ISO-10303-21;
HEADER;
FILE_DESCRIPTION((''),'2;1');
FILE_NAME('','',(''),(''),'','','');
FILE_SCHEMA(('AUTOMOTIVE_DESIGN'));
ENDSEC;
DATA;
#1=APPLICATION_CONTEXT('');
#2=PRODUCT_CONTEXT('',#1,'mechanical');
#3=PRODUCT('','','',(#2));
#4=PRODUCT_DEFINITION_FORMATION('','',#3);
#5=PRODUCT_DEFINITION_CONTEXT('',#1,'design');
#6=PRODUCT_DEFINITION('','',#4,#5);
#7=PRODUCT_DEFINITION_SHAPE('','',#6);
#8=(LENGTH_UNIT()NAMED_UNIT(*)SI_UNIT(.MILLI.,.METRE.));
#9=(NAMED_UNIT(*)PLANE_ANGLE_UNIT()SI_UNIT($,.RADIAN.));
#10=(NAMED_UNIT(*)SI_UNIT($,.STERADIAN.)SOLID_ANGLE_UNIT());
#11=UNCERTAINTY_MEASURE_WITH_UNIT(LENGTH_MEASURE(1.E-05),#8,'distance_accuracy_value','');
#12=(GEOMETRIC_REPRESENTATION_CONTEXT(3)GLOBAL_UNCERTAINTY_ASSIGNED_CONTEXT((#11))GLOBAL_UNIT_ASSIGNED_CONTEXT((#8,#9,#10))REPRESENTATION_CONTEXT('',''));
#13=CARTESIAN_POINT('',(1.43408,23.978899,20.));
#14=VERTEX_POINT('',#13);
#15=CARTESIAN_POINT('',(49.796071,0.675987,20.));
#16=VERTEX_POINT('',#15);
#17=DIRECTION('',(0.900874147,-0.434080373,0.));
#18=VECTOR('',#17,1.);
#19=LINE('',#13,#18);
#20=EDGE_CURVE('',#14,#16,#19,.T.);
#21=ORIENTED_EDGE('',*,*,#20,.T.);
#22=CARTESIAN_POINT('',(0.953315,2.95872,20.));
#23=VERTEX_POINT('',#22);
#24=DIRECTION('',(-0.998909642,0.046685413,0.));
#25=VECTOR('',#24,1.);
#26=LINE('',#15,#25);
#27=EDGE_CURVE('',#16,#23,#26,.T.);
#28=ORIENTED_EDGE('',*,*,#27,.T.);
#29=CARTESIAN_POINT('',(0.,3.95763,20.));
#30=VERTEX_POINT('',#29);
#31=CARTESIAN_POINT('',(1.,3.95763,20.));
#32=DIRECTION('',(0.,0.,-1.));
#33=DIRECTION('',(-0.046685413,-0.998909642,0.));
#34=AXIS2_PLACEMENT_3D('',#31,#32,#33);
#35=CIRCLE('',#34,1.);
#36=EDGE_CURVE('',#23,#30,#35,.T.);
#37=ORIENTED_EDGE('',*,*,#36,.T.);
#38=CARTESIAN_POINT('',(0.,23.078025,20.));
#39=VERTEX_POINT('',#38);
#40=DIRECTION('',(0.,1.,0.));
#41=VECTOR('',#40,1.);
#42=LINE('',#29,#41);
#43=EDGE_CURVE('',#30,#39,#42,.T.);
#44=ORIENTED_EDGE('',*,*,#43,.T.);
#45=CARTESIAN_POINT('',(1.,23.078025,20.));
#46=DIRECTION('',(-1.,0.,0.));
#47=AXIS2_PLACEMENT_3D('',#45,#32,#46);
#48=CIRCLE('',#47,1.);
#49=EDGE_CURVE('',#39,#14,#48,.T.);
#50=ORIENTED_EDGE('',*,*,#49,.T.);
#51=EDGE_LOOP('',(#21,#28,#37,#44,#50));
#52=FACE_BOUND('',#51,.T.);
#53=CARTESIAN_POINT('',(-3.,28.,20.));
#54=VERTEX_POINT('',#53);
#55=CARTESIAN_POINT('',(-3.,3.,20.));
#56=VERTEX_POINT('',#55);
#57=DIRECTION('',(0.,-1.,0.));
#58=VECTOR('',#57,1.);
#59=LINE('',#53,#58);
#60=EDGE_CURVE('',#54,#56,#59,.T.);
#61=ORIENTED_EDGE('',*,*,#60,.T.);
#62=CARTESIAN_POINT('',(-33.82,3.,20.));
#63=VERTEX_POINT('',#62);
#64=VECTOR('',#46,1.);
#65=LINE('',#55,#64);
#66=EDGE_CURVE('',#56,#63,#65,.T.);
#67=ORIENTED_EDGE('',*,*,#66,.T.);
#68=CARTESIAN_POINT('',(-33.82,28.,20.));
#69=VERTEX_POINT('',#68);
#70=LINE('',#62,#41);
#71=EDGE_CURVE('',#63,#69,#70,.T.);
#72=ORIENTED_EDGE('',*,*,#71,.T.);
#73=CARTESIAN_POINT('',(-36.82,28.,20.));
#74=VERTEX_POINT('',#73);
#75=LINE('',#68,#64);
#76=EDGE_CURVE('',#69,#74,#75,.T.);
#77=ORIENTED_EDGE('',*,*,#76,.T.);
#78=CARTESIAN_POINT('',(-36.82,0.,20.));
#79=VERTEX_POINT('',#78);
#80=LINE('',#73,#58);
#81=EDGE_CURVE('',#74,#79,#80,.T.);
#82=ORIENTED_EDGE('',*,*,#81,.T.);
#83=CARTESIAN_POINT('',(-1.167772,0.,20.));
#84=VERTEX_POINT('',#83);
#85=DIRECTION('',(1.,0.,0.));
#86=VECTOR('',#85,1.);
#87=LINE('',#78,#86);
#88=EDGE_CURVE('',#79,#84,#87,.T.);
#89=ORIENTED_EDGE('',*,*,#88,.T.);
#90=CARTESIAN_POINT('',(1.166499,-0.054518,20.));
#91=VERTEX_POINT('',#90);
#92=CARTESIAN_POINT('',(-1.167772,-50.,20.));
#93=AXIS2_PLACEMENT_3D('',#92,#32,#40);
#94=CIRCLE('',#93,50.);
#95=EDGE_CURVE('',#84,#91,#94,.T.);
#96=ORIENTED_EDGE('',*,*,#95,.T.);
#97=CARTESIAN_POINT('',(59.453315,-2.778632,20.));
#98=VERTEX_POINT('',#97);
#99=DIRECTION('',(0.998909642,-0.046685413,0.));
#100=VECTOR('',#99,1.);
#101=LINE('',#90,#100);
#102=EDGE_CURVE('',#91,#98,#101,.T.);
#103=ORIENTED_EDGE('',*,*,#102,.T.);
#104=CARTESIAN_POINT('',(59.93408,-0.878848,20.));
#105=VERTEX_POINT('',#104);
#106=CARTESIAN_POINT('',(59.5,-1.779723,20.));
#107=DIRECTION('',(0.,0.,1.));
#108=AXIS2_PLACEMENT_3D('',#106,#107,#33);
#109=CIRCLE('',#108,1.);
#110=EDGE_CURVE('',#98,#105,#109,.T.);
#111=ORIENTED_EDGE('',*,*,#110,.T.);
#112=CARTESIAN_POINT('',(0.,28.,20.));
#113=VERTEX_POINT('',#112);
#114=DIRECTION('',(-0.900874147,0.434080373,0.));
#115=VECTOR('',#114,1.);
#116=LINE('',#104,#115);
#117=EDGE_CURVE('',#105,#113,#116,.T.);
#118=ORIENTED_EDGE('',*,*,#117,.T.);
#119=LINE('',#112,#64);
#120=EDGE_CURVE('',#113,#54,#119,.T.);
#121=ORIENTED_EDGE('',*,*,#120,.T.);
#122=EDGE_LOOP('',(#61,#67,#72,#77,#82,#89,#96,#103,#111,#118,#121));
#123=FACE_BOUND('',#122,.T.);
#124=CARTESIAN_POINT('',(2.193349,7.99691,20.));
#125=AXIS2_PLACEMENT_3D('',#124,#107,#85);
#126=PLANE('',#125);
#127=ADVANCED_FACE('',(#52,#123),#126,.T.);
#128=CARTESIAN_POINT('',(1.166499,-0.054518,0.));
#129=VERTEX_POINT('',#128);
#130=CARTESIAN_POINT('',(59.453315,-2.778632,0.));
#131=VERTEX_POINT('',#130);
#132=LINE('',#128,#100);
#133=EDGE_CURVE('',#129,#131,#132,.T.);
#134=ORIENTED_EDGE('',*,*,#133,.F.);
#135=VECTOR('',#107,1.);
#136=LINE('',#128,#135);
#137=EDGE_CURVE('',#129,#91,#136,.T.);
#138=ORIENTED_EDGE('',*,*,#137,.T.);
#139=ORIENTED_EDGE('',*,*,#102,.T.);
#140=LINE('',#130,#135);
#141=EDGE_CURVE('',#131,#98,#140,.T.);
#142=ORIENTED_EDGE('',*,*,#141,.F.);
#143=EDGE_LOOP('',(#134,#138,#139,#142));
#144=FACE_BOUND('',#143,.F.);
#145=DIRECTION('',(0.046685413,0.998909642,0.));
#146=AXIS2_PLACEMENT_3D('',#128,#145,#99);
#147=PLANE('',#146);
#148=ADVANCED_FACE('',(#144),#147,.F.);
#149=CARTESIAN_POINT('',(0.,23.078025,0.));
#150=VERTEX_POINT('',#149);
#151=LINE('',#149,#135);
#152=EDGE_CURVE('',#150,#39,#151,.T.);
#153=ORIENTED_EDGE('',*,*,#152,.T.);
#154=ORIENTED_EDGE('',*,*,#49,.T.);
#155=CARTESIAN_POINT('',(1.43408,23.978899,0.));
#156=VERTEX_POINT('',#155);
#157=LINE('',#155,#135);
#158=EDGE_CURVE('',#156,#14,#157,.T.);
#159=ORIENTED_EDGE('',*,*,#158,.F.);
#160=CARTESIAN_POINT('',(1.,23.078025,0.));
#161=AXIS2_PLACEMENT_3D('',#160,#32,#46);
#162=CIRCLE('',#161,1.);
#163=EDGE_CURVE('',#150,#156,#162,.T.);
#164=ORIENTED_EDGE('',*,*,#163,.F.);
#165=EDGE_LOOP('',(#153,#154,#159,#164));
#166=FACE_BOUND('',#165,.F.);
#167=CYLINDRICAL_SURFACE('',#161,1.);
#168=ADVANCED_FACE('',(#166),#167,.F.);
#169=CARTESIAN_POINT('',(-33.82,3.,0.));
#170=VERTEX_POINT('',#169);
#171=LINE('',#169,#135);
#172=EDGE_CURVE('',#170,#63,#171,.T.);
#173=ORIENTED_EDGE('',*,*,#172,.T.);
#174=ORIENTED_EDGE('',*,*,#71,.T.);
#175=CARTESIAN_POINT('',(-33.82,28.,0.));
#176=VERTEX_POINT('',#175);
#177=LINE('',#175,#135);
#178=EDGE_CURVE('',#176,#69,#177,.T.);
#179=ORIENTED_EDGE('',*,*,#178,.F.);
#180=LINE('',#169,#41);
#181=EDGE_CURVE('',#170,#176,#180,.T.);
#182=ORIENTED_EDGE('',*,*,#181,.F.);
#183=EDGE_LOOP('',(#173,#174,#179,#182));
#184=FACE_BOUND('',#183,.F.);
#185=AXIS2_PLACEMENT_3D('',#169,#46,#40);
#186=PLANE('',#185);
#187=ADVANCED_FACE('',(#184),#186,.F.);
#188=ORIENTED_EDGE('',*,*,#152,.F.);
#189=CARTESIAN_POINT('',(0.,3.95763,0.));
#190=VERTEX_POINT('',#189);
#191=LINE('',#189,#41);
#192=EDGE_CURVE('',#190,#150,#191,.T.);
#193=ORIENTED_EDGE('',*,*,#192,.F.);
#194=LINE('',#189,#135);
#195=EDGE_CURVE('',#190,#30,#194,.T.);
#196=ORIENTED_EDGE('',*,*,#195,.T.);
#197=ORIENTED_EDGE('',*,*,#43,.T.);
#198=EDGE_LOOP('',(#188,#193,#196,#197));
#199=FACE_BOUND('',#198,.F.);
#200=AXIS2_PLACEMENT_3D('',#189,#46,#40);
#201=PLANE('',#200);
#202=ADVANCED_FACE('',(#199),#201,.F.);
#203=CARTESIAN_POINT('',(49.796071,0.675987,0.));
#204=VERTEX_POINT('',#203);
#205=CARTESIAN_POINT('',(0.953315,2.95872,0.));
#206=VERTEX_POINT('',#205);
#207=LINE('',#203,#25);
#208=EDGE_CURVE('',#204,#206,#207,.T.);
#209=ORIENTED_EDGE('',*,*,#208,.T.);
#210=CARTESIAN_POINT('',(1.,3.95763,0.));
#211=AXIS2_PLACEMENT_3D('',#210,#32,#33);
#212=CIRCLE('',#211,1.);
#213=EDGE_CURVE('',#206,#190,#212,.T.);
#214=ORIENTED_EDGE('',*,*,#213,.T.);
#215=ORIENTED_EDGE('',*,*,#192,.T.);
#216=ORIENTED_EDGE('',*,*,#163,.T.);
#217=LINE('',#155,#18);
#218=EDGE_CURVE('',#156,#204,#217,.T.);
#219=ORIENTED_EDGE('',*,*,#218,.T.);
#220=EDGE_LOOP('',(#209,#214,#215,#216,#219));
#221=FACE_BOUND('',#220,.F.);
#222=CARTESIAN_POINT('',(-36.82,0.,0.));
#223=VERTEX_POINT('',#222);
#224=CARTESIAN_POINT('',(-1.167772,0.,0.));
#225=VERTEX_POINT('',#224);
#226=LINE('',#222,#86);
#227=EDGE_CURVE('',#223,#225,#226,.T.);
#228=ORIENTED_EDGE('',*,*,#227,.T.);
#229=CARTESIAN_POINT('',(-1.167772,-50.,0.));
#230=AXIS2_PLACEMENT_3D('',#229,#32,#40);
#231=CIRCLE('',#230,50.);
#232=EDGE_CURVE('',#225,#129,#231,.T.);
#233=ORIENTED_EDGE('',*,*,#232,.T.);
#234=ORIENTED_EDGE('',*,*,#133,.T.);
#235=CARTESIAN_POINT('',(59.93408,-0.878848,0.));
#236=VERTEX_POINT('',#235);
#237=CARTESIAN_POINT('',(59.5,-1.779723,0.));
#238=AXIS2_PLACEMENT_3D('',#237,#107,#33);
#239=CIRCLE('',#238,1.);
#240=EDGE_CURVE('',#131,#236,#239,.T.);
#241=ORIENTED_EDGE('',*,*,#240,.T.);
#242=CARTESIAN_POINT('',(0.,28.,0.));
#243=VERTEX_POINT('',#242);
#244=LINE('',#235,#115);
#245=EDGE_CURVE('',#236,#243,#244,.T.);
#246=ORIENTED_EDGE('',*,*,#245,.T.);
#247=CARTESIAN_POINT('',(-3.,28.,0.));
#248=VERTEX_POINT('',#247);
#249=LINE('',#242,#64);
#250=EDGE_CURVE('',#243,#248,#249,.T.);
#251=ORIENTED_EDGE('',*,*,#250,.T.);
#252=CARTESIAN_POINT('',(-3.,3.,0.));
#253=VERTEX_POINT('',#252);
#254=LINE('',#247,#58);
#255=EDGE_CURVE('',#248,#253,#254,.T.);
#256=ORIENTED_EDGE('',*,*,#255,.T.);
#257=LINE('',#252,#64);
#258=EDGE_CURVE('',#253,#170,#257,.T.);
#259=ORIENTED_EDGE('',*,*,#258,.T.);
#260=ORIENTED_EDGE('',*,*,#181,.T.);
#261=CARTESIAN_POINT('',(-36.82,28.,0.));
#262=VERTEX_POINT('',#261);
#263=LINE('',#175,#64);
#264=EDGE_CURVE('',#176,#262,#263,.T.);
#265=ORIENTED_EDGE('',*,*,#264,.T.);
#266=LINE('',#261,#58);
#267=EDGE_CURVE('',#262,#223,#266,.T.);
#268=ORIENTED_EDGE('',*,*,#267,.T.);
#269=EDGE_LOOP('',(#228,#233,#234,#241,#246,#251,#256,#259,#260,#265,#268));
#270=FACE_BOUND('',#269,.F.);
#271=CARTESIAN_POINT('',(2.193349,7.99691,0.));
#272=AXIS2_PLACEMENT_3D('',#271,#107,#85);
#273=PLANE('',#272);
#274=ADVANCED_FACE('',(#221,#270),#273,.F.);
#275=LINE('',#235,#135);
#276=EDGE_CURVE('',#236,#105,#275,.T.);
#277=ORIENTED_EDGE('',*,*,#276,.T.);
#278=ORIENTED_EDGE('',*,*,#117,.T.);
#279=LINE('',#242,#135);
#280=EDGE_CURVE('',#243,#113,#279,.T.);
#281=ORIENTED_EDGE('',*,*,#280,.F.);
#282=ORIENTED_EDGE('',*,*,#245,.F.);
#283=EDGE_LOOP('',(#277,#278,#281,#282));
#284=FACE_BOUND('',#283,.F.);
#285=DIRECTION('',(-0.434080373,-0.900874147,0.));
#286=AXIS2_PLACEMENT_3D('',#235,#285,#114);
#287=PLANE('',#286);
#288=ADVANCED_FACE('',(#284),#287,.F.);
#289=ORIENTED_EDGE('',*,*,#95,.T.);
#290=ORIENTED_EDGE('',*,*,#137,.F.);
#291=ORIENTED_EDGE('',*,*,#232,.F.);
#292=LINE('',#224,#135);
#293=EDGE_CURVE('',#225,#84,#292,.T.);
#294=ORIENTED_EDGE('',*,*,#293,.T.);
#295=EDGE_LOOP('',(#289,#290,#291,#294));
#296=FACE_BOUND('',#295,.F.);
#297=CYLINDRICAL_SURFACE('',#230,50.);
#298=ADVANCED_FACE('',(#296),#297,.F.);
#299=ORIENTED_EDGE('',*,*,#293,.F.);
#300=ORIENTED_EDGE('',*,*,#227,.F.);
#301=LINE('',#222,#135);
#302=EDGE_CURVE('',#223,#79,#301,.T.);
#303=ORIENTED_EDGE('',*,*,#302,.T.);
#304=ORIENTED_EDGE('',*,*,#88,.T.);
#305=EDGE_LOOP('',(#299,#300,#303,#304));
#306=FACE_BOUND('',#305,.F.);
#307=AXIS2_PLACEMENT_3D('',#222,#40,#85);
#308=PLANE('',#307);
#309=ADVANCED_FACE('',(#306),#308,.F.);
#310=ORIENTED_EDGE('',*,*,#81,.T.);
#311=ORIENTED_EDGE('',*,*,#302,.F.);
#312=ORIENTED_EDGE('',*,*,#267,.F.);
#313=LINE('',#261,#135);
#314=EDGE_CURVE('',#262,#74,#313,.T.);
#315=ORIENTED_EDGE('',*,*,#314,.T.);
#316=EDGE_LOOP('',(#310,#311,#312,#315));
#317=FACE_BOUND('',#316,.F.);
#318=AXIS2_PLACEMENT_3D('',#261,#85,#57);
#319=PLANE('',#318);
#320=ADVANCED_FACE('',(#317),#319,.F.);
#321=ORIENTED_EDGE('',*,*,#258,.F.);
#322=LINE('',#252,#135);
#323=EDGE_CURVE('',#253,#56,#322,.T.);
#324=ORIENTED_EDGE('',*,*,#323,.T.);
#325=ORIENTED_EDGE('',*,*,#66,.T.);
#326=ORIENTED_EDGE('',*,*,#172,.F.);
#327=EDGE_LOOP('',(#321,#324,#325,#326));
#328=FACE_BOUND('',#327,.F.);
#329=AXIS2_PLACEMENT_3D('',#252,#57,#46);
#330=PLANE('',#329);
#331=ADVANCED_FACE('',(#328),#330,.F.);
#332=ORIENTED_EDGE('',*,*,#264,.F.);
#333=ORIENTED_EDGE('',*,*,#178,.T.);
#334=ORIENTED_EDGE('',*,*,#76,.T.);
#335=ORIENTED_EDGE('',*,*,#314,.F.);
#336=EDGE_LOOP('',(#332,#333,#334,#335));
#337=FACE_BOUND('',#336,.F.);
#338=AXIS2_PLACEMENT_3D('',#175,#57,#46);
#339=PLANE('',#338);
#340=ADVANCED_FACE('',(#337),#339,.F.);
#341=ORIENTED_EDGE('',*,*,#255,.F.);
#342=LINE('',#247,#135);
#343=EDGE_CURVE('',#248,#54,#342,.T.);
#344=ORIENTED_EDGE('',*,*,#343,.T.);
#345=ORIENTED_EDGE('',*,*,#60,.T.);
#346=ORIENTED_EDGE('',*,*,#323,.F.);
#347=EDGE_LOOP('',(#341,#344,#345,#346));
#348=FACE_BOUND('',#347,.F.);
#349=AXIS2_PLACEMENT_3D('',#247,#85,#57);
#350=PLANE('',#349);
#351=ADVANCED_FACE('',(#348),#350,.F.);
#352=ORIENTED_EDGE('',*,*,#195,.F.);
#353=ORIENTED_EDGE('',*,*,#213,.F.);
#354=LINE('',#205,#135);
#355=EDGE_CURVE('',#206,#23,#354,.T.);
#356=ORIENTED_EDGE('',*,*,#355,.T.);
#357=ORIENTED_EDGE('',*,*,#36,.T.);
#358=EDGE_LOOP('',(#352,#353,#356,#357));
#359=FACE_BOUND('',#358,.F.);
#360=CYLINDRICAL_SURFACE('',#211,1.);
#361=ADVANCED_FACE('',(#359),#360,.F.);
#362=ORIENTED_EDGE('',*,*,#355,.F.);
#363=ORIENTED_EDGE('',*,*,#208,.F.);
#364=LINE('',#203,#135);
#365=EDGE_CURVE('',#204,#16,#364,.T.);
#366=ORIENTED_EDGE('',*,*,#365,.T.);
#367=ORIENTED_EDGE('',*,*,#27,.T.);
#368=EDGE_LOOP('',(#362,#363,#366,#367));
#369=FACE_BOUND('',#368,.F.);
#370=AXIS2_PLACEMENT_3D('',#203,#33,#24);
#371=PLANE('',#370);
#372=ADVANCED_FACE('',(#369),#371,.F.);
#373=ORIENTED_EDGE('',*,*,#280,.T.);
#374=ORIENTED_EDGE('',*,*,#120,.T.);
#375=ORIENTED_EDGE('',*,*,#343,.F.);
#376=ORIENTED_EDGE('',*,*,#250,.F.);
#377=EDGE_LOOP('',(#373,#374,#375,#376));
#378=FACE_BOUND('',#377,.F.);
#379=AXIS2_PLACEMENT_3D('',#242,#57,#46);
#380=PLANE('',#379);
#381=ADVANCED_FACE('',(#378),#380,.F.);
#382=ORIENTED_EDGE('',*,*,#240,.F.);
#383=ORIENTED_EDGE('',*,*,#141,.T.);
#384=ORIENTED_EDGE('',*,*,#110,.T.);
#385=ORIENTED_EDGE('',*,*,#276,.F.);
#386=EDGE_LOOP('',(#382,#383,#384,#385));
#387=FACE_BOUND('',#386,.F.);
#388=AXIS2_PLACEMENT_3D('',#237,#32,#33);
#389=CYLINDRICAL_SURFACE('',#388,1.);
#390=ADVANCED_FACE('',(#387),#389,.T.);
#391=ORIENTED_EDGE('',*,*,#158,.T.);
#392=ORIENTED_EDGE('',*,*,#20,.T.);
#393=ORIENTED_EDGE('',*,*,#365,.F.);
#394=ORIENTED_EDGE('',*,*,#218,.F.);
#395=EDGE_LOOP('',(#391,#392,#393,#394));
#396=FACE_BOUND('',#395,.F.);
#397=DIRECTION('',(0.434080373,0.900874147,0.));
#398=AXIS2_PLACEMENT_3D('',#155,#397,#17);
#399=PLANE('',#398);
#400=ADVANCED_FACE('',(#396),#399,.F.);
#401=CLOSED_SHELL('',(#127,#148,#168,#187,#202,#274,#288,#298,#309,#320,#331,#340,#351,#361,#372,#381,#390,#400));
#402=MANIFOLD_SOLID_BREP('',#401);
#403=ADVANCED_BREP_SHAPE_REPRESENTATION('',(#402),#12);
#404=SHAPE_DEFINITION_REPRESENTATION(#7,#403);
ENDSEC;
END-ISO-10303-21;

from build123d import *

# Parameters (mm, degrees)
F2_DEPTH = 20


with BuildPart() as f2:
    # F1 (on Top) → F2 (new body)
    with BuildSketch(Plane.XY):
        with BuildLine():
            Line((-36.82, 0), (-1.1677719632, 0))
            ThreePointArc((-1.1677719632, 0), (-0.0003183659, -0.0136313372), (1.1664986733, -0.0545179161))
            Line((1.1664986733, -0.0545179161), (59.4533145873, -2.7786322345))
            ThreePointArc((59.4533145873, -2.7786322345), (60.4694396966, -2.0250523194), (59.9340803732, -0.8788484453))
            Line((59.9340803732, -0.8788484453), (0, 28))
            Line((0, 28), (-3, 28))
            Line((-3, 28), (-3, 3))
            Line((-3, 3), (-33.82, 3))
            Line((-33.82, 3), (-33.82, 28))
            Line((-33.82, 28), (-36.82, 28))
            Line((-36.82, 28), (-36.82, 0))
        make_face()
        with BuildLine():
            ThreePointArc((0.9533145873, 2.9587201802), (0.2765757079, 3.267226104), (0, 3.9576298219))
            Line((0, 3.9576298219), (0, 23.0780246214))
            ThreePointArc((0, 23.0780246214), (0.4680603292, 23.924806876), (1.4340803732, 23.9788987689))
            Line((1.4340803732, 23.9788987689), (49.7960707162, 0.6759869543))
            Line((49.7960707162, 0.6759869543), (0.9533145873, 2.9587201802))
        make_face(mode=Mode.SUBTRACT)
    extrude(amount=F2_DEPTH)


solid = f2.part
